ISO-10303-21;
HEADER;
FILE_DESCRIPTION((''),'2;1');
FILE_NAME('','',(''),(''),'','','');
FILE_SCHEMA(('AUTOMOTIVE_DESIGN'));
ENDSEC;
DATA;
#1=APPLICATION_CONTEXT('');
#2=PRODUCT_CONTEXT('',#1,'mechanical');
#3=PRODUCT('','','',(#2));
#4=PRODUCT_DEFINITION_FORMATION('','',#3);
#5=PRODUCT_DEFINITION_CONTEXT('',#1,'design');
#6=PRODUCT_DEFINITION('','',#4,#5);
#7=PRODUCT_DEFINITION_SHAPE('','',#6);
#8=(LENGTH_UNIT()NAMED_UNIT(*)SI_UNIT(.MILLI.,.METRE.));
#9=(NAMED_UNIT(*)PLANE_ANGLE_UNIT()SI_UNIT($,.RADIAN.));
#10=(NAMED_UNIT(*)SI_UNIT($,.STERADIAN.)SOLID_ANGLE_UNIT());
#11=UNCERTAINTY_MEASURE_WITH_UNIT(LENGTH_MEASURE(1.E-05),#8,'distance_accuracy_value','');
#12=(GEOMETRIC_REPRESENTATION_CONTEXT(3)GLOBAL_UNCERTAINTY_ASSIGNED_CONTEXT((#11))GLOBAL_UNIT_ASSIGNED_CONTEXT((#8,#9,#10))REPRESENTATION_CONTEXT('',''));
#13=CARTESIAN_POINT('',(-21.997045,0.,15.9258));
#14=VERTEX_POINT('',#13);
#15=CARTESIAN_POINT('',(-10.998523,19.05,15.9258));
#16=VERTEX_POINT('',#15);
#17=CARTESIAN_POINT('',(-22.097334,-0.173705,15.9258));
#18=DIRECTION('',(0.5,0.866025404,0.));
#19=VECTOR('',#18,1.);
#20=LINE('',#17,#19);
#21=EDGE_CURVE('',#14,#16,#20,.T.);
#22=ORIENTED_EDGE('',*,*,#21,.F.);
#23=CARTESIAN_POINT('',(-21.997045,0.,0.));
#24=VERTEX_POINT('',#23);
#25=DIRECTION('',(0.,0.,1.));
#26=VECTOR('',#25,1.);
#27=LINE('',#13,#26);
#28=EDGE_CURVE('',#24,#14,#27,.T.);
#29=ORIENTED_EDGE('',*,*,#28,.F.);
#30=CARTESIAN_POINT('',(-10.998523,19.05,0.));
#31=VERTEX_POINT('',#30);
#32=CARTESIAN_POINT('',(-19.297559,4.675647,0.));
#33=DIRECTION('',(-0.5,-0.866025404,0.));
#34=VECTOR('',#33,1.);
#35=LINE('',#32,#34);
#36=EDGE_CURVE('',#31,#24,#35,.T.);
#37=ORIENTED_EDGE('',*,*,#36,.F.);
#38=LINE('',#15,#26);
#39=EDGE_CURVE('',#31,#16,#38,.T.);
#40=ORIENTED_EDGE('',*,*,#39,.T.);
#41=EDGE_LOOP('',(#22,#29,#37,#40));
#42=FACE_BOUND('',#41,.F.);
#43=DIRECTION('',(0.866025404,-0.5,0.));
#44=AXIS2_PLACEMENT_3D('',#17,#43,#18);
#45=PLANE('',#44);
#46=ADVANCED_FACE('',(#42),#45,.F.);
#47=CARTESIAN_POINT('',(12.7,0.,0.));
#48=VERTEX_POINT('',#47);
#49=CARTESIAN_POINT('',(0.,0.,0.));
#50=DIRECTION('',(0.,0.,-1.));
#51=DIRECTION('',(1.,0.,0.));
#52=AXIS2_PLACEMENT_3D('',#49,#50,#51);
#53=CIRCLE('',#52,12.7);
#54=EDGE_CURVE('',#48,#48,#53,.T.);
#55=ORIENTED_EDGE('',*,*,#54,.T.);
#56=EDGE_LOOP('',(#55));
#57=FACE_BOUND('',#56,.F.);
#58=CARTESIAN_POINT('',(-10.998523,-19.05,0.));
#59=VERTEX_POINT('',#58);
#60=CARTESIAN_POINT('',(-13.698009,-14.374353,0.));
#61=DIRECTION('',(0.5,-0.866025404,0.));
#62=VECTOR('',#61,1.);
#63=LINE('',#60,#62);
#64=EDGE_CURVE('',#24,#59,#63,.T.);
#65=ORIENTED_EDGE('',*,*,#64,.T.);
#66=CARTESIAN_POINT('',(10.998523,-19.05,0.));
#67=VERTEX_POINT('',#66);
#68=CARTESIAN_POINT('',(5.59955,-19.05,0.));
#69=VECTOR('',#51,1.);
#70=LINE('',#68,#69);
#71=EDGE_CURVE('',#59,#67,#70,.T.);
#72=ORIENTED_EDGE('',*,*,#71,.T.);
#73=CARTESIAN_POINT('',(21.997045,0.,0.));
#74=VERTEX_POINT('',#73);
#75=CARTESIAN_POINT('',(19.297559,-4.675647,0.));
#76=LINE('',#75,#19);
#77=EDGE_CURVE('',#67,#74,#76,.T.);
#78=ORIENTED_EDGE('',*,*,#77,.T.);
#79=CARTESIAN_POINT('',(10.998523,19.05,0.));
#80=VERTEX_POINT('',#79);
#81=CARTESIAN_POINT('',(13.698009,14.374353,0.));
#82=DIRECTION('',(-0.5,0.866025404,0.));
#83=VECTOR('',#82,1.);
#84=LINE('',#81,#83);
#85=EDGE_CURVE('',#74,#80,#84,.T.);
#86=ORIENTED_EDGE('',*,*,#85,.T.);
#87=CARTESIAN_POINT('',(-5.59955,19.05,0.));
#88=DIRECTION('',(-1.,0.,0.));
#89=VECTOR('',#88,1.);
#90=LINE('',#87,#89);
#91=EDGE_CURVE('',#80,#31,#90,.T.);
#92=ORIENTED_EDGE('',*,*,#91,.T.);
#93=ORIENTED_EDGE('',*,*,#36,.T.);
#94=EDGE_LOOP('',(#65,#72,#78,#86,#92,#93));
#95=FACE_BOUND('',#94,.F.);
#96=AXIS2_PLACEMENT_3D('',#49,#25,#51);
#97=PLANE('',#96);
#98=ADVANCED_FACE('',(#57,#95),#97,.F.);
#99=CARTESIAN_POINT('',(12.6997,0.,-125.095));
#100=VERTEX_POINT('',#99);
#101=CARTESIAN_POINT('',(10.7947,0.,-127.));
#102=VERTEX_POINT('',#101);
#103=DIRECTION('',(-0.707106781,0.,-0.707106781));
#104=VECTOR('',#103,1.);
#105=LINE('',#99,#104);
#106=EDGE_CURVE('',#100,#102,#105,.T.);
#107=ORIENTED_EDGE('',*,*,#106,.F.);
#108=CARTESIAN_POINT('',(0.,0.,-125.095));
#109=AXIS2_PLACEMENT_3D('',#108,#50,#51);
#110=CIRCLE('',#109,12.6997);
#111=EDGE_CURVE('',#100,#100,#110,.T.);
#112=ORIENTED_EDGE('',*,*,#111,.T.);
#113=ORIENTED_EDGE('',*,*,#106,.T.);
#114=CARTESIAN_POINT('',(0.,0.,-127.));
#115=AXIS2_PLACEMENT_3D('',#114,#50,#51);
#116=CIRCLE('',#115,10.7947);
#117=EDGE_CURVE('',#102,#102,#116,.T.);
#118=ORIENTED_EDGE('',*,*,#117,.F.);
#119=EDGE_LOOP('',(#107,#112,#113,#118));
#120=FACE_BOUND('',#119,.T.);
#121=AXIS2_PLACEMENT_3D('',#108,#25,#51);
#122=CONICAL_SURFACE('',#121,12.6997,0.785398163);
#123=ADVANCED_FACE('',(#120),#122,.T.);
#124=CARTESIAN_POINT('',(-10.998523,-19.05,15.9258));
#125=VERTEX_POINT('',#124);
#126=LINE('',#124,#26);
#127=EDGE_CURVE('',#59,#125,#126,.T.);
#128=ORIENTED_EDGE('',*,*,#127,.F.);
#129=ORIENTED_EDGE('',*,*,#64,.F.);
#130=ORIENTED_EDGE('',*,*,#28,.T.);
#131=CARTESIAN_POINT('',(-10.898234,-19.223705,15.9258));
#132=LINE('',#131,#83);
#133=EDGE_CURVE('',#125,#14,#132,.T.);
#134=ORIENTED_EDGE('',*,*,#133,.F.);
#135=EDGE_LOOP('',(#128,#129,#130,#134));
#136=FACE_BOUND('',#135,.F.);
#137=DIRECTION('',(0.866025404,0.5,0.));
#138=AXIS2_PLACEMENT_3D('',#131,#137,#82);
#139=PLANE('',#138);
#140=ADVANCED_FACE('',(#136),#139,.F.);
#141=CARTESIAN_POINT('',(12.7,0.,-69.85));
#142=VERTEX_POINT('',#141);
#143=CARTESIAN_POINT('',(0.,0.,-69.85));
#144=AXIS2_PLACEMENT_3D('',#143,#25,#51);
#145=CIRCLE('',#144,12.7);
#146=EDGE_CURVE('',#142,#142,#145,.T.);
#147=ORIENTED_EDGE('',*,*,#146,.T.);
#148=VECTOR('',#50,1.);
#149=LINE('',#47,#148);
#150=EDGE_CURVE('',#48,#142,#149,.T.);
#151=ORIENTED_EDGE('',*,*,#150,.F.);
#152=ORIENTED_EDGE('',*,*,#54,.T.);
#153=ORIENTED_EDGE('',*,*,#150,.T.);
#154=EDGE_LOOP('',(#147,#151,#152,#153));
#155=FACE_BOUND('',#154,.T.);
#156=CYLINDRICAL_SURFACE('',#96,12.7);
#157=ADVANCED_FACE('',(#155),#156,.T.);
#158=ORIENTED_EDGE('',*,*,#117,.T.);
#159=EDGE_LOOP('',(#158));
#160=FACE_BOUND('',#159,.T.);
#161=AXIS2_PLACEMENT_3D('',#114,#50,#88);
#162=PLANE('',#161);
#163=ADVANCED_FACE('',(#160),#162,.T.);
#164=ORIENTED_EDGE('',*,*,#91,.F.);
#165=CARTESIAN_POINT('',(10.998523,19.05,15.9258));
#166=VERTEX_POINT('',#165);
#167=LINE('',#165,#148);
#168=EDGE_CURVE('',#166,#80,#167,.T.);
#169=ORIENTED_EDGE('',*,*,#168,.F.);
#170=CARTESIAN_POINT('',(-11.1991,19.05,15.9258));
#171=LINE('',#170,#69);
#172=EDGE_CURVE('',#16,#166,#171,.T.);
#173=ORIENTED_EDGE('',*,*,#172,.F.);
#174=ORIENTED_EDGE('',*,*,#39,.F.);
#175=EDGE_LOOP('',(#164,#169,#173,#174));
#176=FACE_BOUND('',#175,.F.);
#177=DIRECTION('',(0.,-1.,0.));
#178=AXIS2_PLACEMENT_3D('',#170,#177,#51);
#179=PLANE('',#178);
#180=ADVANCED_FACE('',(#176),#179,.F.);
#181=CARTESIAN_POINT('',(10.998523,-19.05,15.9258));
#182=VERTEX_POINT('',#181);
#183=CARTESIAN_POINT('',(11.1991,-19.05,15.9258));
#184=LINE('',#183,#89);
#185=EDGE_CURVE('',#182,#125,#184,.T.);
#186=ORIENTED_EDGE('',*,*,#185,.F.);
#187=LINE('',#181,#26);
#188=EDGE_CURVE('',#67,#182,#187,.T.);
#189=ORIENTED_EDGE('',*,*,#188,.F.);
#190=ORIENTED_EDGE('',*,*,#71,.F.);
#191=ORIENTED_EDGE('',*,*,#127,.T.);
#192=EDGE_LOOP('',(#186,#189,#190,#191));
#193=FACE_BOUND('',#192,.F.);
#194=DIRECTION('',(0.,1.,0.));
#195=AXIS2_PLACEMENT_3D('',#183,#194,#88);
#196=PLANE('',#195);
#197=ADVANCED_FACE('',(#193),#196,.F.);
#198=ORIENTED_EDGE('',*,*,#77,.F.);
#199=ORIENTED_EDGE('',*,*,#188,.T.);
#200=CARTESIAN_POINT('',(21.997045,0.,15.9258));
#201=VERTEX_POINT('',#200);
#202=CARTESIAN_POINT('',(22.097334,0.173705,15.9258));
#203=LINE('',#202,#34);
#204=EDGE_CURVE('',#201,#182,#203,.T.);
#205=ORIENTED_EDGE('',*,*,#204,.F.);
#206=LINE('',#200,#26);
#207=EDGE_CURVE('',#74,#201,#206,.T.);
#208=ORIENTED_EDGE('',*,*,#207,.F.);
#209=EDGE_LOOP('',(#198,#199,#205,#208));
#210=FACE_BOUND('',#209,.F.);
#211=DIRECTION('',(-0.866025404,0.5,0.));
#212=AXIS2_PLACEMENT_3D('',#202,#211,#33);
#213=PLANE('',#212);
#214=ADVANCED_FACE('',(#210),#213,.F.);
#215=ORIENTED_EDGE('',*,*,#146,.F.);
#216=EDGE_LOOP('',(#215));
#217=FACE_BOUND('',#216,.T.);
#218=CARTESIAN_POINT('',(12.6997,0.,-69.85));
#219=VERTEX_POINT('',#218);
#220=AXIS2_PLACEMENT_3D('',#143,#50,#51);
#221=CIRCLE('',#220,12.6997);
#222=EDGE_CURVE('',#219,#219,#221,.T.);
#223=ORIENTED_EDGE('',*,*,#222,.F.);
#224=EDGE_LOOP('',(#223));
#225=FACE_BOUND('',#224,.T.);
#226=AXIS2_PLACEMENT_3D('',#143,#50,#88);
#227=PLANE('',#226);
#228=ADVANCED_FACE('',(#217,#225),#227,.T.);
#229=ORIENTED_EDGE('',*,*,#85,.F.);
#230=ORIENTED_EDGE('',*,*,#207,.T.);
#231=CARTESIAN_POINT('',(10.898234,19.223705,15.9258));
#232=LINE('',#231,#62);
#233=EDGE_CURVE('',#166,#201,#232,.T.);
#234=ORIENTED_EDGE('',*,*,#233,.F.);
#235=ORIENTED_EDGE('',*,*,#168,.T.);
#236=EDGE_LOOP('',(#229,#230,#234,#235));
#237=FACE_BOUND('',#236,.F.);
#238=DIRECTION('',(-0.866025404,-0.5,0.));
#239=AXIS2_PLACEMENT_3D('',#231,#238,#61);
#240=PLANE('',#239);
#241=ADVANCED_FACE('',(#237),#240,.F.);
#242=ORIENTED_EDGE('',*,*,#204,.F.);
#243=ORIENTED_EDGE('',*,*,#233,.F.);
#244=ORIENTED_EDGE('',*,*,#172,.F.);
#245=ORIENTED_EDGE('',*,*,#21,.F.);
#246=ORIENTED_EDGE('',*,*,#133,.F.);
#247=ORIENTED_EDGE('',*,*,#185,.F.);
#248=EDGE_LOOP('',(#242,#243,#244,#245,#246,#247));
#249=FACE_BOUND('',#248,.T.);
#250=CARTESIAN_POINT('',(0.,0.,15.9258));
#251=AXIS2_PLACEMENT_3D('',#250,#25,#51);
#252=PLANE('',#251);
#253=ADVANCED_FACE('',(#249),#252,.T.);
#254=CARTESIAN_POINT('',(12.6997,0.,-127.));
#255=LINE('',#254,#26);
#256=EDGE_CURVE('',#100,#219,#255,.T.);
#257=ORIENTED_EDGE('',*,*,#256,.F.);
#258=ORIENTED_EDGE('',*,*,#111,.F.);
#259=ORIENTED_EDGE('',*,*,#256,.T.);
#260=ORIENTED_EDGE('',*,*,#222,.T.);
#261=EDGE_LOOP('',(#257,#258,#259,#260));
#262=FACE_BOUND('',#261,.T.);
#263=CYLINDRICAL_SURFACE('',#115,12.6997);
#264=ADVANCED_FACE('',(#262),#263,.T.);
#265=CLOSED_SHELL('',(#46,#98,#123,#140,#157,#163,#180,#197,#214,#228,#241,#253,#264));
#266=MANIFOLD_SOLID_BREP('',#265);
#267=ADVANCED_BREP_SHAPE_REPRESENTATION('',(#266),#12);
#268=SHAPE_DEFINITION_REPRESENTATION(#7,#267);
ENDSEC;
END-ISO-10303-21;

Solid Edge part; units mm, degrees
sketch "Sketch1" plane through (0, 0, 0) normal (0, 0, 1) x (1, 0, 0)
  circle A0 centre (0, 0) radius 22.098
  dimension "D1" = 44.196
extrude "Protrusion1" add sketch "Sketch1" along normal blind 15.9258
sketch "Sketch2" plane through (0, 0, 0) normal (0, 0, -1) x (1, 0, 0)
  circle A0 centre (0, 0) radius 12.7
extrude "Protrusion2" add sketch "Sketch2" along normal blind 127
sketch "Sketch3" plane through (0, 0, -127) normal (0, 0, -1) x (1, 0, 0)
  circle A0 centre (0, 0) radius 12.6997
extrude "Cutout1" cut sketch "Sketch3" against normal blind 57.15 flip side to cut
chamfer "Chamfer_1" distance 1.905 angle 45 1 edges at (-12.6997, 0, -127)
sketch "Sketch4" plane through (0, 0, 15.9258) normal (0, 0, 1) x (1, 0, 0)
  line L0 (-11.1991, 19.05) -> (11.1991, 19.05)
  dimension "D1" = 38.1
extrude "Cutout2" cut sketch "Sketch4" against normal up to next material side at (0, 19.1, 15.9258)
pattern_circular "Pattern1" count 6 over 360 about axis through (0, 0, 15.9258) along (0, 0, 1) of "Cutout2"
properties part number "24101338"
